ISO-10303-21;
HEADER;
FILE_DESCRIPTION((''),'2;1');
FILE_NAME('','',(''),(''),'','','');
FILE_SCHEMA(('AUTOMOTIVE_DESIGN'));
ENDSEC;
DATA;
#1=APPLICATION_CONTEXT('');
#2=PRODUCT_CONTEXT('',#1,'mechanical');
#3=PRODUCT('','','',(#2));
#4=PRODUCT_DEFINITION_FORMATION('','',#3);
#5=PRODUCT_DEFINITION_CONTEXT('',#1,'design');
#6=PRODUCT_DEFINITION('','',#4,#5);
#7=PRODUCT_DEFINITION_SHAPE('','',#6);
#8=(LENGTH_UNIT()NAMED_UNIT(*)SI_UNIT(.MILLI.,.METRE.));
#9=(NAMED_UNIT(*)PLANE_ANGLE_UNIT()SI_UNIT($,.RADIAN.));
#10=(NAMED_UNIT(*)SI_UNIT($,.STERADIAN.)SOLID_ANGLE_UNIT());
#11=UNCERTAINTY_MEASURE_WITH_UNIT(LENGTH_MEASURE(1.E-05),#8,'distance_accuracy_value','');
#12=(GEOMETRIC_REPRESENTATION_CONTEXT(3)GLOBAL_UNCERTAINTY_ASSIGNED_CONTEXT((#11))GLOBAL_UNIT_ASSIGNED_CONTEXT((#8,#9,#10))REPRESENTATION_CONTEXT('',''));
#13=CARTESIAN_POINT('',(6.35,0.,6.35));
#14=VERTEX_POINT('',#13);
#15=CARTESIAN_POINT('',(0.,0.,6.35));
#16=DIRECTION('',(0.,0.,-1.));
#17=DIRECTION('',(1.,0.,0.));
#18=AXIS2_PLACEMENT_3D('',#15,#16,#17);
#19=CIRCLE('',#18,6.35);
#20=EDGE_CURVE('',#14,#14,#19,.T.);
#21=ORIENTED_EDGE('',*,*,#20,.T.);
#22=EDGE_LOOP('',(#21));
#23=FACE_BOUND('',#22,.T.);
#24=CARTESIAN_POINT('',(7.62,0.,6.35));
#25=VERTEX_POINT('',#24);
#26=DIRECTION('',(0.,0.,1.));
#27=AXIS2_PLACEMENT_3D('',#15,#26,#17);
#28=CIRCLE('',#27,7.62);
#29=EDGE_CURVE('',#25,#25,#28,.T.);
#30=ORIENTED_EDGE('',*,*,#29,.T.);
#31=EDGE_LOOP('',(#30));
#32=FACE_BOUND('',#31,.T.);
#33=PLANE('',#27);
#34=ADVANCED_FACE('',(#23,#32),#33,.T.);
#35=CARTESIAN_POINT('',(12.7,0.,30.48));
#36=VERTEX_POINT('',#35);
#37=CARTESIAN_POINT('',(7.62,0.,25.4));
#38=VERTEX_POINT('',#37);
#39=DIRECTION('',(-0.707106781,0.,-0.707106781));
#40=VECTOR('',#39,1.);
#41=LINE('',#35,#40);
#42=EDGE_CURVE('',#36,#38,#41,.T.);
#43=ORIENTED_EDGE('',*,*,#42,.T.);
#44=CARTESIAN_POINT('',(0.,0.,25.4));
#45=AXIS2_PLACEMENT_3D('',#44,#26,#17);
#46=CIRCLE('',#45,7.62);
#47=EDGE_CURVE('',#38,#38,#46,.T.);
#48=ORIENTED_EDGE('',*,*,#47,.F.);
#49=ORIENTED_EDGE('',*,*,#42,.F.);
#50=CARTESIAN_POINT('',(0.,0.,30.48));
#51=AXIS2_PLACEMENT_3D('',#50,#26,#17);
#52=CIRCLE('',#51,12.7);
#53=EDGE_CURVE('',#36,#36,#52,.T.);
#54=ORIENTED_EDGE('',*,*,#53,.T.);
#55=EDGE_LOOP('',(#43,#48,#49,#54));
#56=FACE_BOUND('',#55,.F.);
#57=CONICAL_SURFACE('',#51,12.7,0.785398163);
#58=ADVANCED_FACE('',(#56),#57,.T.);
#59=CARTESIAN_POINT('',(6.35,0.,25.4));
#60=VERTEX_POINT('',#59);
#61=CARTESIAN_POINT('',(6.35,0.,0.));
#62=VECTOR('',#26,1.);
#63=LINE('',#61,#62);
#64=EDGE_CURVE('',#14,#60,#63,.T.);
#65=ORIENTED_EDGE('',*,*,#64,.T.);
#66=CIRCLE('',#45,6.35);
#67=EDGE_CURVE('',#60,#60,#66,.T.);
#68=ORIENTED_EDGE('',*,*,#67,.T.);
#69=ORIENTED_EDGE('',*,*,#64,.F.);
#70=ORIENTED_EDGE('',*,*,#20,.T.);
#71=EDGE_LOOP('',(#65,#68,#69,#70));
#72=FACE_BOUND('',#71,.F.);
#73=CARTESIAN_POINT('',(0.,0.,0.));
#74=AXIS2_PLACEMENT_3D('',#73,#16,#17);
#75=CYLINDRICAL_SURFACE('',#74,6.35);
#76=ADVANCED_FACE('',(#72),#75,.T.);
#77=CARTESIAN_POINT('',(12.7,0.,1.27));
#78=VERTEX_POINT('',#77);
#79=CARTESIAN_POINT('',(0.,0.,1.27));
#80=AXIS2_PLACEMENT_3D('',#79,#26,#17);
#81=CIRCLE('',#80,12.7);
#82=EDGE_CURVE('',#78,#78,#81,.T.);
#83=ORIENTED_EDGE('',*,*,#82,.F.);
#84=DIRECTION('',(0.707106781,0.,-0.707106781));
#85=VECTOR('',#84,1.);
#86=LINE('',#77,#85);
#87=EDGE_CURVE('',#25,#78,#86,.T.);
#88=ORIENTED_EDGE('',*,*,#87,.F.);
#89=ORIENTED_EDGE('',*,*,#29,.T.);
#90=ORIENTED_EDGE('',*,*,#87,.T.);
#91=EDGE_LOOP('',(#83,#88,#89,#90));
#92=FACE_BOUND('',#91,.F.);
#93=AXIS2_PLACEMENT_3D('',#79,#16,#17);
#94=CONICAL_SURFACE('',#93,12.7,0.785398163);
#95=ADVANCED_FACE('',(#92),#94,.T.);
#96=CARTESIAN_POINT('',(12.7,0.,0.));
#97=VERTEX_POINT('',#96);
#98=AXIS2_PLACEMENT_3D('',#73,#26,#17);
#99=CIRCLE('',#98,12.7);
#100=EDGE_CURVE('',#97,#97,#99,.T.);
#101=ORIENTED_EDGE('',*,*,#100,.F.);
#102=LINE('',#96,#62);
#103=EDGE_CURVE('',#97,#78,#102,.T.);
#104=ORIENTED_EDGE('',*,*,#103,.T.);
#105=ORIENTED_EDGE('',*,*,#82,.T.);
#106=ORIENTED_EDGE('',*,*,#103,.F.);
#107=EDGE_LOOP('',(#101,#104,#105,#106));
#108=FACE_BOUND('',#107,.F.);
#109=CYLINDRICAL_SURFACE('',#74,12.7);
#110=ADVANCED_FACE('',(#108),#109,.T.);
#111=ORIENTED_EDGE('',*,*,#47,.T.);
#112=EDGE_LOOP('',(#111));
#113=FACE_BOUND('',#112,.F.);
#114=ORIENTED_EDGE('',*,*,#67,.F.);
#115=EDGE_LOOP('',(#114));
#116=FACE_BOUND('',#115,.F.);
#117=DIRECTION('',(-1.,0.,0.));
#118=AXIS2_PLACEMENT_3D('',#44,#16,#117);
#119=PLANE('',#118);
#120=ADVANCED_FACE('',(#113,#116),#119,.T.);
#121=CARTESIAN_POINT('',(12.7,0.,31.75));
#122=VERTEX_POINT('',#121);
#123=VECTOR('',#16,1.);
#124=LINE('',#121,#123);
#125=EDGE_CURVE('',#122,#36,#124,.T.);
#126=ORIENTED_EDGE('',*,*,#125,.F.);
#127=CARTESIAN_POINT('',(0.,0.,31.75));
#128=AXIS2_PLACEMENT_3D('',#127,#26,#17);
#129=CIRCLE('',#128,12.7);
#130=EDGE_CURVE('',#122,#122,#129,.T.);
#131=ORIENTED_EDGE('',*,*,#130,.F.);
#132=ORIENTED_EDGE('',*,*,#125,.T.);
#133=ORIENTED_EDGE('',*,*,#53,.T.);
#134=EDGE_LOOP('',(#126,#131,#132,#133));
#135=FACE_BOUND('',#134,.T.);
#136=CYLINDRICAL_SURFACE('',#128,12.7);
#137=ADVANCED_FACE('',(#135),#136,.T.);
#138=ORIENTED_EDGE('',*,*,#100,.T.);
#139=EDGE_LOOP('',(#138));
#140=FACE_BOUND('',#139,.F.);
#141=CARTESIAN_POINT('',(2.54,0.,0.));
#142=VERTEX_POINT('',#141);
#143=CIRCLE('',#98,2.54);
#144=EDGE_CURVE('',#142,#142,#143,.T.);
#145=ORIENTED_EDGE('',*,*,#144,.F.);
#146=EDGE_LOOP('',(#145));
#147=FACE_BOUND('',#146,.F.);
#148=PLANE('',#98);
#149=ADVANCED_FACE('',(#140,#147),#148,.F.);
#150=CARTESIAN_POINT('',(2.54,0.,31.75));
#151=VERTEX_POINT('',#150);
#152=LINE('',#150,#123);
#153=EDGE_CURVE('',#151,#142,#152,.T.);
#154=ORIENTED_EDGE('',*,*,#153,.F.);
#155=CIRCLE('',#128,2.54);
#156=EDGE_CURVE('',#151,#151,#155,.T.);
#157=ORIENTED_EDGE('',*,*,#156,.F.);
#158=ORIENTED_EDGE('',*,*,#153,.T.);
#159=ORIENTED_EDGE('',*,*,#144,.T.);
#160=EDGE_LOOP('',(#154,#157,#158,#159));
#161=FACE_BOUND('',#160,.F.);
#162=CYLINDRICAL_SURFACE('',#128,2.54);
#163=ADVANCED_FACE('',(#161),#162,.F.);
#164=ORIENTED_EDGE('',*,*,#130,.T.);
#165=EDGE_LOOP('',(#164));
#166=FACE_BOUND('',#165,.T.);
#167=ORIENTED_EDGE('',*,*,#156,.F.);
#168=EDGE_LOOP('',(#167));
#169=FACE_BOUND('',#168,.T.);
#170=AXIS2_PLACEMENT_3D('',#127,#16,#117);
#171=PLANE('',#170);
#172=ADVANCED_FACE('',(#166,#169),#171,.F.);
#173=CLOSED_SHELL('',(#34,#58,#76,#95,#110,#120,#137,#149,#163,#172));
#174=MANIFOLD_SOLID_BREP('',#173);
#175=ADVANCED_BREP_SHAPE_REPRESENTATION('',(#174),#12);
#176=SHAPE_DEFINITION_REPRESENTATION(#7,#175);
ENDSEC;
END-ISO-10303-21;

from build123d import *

# Parameters (mm, degrees)
F0_R     = 12.7
F1_DEPTH = 6.35
F2_R     = 6.35
F3_DEPTH = 25.4
F5_R     = 12.7
F6_DEPTH = 6.35
F7_R     = 2.54
F8_DEPTH = 31.75
F9_SIZE  = 5.08


# Not quite as in the source:
# - a pattern or mirror of a feature is missing from the dataset's text; its kind, count and spacing are read off the source's solid


with BuildPart() as f1:
    # F0 (on Top) → F1 (new body)
    with BuildSketch(Plane.XY):
        Circle(F0_R)
    extrude(amount=F1_DEPTH)


with BuildPart() as f1_copies_1:
    # F1_copies: instance of F1
    add(f1.part.mirror(Plane.XY.offset(15.875)))


with BuildPart() as f1_1:
    add(f1.part)

    add(f1_copies_1.part)  # F3 merges F1_copies_1
    # F2 (on Top) → F3 (join)
    with BuildSketch(Plane.XY):
        Circle(F2_R)
    extrude(amount=F3_DEPTH)

    # F5 (on face) → F6 (join)
    with BuildSketch(Plane.XY.offset(25.4)):
        Circle(F5_R)
    extrude(amount=F6_DEPTH)

    # F7 (on face) → F8 (cut)
    with BuildSketch(Plane.XY.offset(31.75)):
        Circle(F7_R)
    extrude(amount=-F8_DEPTH, mode=Mode.SUBTRACT)

    # F9
    f9_edges = [f1_1.edges().sort_by_distance(p)[0] for p in [
        (-12.7, 0, 25.4),
        (-12.7, 0, 6.35),
    ]]
    chamfer(f9_edges, length=F9_SIZE)


solid = f1_1.part
